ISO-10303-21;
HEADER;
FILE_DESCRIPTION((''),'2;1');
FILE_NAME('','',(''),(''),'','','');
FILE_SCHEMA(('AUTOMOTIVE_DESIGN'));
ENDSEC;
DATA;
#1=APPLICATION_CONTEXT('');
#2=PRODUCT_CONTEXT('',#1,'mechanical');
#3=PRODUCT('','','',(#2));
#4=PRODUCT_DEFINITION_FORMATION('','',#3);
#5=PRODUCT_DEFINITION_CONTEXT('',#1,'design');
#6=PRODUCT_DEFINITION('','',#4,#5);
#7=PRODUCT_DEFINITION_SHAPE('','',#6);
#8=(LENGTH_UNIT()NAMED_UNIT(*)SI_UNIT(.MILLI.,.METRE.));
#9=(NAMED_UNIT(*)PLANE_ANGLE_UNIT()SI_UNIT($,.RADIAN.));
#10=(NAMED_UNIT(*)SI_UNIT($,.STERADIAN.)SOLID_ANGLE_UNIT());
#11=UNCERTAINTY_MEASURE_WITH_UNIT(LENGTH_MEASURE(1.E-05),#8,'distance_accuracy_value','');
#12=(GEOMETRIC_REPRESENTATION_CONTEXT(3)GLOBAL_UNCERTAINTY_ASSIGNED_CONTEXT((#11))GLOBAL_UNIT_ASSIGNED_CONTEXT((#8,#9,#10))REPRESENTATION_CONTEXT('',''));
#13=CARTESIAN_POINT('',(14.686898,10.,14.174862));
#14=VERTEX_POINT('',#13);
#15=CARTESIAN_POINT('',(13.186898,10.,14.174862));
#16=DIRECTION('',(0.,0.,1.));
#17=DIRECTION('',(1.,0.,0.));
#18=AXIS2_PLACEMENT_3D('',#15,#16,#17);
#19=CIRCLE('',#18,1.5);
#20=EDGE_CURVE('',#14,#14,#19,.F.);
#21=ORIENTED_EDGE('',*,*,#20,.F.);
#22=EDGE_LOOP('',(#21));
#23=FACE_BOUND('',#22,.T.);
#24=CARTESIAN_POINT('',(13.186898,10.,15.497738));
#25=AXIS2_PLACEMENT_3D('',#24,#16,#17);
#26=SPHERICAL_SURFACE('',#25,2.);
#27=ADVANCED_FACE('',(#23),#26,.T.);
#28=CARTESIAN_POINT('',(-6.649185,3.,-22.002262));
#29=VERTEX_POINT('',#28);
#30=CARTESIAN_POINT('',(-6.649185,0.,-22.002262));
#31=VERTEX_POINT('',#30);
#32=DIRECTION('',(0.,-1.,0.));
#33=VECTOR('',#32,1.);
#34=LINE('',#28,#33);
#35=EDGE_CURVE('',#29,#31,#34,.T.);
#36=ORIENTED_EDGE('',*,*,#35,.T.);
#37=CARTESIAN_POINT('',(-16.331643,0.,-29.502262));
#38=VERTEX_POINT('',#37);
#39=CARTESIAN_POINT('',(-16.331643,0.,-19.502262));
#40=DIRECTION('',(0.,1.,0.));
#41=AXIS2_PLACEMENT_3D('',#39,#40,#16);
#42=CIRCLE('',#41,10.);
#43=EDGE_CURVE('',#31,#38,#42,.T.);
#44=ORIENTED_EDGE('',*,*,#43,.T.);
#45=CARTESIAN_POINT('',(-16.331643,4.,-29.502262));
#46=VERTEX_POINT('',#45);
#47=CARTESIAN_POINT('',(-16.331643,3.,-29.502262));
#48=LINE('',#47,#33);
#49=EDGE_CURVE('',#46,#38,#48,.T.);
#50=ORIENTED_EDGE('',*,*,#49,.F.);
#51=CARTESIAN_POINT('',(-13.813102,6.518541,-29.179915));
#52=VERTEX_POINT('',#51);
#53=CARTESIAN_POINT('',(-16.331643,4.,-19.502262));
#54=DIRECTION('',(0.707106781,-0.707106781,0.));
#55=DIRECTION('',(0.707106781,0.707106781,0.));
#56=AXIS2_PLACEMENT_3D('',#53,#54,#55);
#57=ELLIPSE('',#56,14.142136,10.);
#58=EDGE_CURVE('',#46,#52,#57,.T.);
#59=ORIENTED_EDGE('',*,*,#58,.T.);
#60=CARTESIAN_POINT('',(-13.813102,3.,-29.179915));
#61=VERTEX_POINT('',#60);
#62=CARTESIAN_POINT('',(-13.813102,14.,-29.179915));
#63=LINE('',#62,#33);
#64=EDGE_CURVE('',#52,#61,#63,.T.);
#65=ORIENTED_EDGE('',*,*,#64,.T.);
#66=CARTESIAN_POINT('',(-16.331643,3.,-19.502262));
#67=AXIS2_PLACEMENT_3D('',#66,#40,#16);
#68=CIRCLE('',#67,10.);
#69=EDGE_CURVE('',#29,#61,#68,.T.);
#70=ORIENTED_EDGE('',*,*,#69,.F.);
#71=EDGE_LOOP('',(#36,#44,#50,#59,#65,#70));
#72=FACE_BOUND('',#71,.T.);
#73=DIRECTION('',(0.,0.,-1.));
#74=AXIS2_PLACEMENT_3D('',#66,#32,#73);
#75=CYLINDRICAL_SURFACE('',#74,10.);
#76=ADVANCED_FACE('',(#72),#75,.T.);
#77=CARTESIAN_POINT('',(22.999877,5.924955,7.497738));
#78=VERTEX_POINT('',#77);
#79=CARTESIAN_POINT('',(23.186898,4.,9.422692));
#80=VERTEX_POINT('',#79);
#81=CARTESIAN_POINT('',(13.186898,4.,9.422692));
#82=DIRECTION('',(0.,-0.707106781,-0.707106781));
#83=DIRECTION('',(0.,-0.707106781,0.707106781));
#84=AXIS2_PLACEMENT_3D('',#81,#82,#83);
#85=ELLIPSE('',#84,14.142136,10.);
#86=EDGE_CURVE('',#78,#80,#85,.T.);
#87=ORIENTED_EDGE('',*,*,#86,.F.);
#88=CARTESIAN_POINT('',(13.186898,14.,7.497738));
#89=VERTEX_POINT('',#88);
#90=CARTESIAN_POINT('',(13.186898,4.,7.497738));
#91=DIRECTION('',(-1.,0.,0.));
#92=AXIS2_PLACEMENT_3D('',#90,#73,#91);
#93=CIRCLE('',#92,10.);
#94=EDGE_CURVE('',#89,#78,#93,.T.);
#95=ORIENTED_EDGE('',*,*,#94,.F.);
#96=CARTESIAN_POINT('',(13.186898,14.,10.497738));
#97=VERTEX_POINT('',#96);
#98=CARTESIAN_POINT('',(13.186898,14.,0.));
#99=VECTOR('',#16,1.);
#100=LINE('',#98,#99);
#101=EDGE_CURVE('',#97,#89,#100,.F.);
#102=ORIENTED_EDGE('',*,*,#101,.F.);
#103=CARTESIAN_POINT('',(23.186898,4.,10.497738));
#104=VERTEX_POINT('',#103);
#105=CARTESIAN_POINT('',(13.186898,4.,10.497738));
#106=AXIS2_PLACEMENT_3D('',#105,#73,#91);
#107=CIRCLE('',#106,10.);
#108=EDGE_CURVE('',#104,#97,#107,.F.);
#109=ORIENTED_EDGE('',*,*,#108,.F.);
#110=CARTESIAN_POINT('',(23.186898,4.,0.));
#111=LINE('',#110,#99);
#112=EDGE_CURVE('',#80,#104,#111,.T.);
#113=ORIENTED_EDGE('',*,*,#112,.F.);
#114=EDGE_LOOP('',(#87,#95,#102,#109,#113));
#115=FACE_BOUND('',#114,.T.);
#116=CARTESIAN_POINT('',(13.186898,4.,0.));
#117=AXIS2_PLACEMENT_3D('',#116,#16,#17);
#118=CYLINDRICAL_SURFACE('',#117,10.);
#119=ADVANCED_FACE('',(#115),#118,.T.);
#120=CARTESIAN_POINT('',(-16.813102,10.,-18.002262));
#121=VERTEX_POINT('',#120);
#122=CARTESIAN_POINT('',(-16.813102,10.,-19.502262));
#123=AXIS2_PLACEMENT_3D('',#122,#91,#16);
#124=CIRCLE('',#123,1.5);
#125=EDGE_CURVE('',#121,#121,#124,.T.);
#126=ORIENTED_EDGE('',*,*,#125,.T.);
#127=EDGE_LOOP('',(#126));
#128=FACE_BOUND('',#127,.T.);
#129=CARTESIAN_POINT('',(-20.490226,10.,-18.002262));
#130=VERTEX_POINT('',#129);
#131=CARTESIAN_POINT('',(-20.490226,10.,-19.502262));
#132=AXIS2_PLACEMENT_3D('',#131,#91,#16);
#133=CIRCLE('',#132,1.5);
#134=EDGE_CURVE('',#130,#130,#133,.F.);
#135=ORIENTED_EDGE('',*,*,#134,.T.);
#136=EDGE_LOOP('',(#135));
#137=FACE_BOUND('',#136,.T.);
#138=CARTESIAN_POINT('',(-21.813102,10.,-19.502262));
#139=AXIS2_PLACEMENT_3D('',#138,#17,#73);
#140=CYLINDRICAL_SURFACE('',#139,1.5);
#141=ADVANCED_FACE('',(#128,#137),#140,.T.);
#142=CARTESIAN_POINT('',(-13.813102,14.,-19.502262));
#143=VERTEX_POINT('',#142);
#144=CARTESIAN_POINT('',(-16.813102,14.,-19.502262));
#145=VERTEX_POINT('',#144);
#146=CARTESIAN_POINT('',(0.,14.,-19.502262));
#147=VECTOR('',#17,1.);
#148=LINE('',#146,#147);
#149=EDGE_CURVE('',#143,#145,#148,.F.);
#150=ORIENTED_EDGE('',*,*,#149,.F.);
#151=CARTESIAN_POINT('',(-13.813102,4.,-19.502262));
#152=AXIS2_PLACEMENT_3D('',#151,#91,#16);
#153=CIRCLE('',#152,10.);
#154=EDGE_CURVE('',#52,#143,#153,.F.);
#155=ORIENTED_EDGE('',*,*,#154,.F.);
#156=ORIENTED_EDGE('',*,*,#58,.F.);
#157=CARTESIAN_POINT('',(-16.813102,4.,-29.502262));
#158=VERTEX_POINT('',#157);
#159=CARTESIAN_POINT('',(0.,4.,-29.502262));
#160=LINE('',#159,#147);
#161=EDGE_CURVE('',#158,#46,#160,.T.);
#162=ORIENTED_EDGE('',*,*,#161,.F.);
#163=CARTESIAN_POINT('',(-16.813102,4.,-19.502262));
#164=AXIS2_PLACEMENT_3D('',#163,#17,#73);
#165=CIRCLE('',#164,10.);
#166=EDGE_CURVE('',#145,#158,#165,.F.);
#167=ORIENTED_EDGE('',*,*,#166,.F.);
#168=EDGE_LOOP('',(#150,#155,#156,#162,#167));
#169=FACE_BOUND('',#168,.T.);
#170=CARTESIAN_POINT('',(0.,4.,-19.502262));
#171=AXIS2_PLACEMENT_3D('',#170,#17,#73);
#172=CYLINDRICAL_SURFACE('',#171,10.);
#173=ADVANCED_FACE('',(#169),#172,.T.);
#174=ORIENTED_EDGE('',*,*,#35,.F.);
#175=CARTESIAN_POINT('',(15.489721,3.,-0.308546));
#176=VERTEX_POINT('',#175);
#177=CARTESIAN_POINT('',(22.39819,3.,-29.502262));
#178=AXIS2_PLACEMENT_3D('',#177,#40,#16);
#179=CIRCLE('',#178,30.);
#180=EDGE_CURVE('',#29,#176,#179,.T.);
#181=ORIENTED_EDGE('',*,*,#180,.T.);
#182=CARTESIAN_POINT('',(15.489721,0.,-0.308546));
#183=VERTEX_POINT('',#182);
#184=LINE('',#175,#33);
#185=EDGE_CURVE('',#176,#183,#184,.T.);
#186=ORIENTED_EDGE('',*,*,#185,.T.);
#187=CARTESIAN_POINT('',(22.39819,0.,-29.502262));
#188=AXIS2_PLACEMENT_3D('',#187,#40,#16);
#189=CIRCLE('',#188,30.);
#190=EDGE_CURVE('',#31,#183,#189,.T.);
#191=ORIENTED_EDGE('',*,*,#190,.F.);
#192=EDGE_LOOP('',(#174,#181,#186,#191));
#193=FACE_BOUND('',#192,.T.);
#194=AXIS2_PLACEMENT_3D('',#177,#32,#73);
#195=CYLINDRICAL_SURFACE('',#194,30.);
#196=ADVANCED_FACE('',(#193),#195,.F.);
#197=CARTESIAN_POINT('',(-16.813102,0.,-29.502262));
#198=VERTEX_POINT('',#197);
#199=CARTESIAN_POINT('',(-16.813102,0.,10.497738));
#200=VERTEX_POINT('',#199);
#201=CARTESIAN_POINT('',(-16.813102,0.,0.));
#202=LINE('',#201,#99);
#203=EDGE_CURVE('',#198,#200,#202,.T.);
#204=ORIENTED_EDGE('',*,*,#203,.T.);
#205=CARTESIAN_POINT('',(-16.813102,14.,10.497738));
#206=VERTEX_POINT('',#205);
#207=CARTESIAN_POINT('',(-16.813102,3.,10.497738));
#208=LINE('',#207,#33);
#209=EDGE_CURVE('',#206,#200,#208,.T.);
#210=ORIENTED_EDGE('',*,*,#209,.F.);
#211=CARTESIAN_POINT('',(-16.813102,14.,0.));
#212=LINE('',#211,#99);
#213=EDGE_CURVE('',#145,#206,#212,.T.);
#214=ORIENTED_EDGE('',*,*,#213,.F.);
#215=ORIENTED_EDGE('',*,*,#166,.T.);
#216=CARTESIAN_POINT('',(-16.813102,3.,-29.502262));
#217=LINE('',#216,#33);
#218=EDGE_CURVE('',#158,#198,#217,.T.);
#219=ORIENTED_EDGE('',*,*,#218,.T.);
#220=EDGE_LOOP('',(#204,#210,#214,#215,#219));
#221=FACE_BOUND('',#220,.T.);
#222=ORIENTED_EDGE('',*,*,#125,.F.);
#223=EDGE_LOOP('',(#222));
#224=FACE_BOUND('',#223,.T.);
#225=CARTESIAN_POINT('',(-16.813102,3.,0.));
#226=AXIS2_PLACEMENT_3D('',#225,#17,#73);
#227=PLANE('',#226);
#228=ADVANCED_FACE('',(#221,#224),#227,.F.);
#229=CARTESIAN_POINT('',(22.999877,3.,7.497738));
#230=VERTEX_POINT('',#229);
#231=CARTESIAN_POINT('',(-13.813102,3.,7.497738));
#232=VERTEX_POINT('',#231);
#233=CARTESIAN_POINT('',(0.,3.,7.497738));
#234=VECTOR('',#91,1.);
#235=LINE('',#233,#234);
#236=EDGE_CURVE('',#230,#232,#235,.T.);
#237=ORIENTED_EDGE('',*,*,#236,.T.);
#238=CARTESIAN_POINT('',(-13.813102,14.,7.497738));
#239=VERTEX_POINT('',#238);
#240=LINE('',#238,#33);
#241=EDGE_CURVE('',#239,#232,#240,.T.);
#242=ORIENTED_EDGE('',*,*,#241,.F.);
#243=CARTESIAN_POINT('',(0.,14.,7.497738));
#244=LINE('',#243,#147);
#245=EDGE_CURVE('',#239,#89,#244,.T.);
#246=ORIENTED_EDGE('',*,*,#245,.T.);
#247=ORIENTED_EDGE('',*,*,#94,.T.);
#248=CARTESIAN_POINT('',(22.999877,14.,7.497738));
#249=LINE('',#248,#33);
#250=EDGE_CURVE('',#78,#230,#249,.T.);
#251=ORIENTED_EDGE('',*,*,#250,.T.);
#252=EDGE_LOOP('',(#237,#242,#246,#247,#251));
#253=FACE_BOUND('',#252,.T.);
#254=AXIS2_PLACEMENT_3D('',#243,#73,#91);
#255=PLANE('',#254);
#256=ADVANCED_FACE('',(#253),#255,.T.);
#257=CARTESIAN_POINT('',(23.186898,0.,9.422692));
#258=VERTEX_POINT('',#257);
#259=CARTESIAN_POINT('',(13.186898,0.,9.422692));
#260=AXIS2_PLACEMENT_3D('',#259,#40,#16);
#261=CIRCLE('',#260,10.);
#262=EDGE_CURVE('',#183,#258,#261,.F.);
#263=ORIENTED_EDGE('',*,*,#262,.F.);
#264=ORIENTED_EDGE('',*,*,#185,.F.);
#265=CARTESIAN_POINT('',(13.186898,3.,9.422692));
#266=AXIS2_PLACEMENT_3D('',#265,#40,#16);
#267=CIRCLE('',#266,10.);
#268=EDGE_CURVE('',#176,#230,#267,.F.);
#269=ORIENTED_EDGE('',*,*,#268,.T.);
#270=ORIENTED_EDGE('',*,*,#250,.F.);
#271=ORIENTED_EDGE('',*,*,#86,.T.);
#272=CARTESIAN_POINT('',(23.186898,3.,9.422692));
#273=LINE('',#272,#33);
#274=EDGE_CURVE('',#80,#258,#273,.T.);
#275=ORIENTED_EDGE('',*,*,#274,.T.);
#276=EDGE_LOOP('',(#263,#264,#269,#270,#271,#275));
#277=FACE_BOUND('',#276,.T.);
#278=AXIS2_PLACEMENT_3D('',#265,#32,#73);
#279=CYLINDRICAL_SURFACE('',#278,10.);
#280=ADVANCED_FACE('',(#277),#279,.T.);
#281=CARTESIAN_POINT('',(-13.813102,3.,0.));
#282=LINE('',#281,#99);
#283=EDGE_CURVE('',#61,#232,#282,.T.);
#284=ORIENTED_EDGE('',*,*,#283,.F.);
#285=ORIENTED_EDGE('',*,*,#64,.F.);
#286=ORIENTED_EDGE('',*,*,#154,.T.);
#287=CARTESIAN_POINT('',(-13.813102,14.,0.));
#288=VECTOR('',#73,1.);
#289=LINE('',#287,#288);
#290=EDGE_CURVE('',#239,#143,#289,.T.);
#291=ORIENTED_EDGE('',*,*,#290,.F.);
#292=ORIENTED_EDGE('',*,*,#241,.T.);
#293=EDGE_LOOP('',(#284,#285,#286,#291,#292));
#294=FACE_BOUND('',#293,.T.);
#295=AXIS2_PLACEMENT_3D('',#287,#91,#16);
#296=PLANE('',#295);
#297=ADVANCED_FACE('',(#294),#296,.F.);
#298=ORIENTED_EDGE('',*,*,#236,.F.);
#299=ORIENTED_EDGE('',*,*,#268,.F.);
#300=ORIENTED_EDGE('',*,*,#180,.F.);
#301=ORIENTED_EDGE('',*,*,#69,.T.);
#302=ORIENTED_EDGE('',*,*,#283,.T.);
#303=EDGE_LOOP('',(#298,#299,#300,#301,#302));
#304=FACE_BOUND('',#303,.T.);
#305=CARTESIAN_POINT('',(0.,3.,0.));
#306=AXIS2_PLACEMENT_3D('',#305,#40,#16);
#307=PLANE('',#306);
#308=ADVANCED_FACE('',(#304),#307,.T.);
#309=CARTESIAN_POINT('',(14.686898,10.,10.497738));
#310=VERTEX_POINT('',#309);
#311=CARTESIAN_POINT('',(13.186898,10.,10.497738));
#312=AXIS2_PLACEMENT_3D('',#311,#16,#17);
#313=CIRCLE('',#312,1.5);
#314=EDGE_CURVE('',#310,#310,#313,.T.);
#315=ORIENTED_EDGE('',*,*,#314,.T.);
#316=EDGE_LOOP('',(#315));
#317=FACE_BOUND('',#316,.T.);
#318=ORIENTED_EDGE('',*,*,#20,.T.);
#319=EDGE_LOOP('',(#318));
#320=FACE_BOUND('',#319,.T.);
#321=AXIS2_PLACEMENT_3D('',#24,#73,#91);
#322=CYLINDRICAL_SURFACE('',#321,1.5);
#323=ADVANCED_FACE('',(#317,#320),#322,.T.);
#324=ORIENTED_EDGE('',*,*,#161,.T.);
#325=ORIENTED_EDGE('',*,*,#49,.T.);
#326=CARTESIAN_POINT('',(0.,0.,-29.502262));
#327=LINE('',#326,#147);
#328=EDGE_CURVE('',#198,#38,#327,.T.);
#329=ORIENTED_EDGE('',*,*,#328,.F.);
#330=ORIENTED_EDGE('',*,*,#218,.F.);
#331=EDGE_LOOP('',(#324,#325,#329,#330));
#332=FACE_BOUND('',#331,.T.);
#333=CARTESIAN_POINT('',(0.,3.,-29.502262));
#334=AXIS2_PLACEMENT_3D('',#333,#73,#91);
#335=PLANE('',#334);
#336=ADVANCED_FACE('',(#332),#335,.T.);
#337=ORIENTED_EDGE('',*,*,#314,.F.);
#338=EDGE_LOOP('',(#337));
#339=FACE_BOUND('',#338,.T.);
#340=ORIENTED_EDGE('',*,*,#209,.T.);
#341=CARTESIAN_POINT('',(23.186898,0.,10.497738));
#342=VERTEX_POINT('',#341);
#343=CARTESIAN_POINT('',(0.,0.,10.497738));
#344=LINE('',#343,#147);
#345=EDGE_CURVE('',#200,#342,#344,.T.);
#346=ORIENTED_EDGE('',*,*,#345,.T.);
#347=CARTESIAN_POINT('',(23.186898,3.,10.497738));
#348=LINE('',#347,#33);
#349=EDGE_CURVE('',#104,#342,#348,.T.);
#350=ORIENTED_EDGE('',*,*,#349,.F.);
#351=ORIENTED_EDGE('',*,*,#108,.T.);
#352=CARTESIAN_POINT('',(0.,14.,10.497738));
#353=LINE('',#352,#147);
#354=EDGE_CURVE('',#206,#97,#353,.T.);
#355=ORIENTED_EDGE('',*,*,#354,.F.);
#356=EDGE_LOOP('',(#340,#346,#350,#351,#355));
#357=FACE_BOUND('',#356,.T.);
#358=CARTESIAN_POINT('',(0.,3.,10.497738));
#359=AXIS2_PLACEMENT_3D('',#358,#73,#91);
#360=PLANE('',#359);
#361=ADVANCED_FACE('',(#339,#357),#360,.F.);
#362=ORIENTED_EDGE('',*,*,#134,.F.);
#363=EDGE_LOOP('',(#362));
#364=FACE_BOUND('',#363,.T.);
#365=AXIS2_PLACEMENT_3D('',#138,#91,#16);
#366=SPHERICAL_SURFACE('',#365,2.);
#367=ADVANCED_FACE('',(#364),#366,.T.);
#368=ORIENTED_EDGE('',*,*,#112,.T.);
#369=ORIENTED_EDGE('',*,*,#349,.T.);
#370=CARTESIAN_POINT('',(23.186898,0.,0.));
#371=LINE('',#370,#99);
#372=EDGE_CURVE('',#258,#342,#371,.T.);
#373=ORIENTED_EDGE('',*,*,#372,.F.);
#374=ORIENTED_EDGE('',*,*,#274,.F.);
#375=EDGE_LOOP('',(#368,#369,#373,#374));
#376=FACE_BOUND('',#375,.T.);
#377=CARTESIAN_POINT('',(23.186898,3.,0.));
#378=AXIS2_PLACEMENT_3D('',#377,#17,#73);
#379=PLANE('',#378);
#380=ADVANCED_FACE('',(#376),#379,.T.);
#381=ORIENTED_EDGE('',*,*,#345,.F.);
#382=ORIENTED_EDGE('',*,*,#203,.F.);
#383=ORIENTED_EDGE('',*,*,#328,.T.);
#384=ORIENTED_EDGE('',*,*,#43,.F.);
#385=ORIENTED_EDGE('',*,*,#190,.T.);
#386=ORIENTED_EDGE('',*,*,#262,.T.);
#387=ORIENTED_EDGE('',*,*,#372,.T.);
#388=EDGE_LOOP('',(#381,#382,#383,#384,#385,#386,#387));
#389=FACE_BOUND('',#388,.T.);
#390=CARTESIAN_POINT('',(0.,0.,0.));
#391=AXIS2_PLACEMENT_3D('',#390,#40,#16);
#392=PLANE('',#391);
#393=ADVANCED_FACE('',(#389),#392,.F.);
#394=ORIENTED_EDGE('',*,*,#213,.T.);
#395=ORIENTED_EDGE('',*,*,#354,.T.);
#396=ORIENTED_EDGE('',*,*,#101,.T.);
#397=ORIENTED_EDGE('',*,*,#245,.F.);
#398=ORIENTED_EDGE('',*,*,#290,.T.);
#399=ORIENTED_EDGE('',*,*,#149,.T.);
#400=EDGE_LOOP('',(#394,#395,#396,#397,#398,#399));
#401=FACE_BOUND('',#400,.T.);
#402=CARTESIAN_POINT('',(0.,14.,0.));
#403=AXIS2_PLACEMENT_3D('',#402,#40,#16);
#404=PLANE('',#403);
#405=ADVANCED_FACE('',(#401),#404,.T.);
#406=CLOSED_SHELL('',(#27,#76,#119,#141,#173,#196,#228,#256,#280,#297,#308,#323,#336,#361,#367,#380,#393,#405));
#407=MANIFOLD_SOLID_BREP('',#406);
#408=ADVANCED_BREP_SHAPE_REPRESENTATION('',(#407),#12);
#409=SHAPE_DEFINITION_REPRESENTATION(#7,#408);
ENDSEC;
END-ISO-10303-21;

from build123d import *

# Parameters (mm, degrees)
BOSS_EXTRUDE2_DEPTH = 3
BOSS_EXTRUDE3_DEPTH = 14
FILLET2_R           = 10
SKETCH3_R           = 1.5
BOSS_EXTRUDE4_DEPTH = 5
SKETCH2_R           = 1.5
BOSS_EXTRUDE5_DEPTH = 5


with BuildPart() as part:
    # Sketch1 → Boss-Extrude2 (new body)
    with BuildSketch(Plane(origin=(0, 0, 0), x_dir=(1, 0, 0), z_dir=(0, 1, 0))):
        with BuildLine():
            Line((-13.813102114, 29.179914519), (-13.813102114, -7.497737557))
            Line((-13.813102114, -7.497737557), (22.999876511, -7.497737557))
            ThreePointArc((22.999876511, -7.497737557), (20.393331118, -2.4896323), (15.489720926, 0.308546434))
            ThreePointArc((15.489720926, 0.308546434), (1.40152336, 8.074710364), (-6.649185051, 22.002262443))
            ThreePointArc((-6.649185051, 22.002262443), (-9.253806843, 26.566555008), (-13.813102114, 29.179914519))
        make_face()
        with BuildLine():
            Line((22.999876511, -7.497737557), (-13.813102114, -7.497737557))
            Line((-13.813102114, -7.497737557), (-13.813102114, 29.179914519))
            ThreePointArc((-13.813102114, 29.179914519), (-15.062100342, 29.421348106), (-16.331643417, 29.502262443))
            Line((-16.331643417, 29.502262443), (-16.813102114, 29.502262443))
            Line((-16.813102114, 29.502262443), (-16.813102114, -10.497737557))
            Line((-16.813102114, -10.497737557), (23.186897886, -10.497737557))
            Line((23.186897886, -10.497737557), (23.186897886, -9.422692236))
            ThreePointArc((23.186897886, -9.422692236), (23.140032725, -8.455682992), (22.999876511, -7.497737557))
        make_face()
    extrude(amount=BOSS_EXTRUDE2_DEPTH)

    # Sketch1<4> → Boss-Extrude3 (add)
    with BuildSketch(Plane(origin=(0, 0, 0), x_dir=(1, 0, 0), z_dir=(0, 1, 0))):
        with BuildLine():
            Line((22.999876511, -7.497737557), (-13.813102114, -7.497737557))
            Line((-13.813102114, -7.497737557), (-13.813102114, 29.179914519))
            ThreePointArc((-13.813102114, 29.179914519), (-15.062100342, 29.421348106), (-16.331643417, 29.502262443))
            Line((-16.331643417, 29.502262443), (-16.813102114, 29.502262443))
            Line((-16.813102114, 29.502262443), (-16.813102114, -10.497737557))
            Line((-16.813102114, -10.497737557), (23.186897886, -10.497737557))
            Line((23.186897886, -10.497737557), (23.186897886, -9.422692236))
            ThreePointArc((23.186897886, -9.422692236), (23.140032725, -8.455682992), (22.999876511, -7.497737557))
        make_face()
    extrude(amount=BOSS_EXTRUDE3_DEPTH)

    # Fillet2
    # the kernel refuses this fillet: 10 mm, written as the material it takes off along each edge
    with BuildSketch(Plane(origin=(8.668356583, 14, -29.502262443), x_dir=(0, -1, 0), z_dir=(-1, 0, 0))) as fillet2_piece_1:
        with BuildLine():
            CenterArc((FILLET2_R, FILLET2_R), FILLET2_R, 180, 90)
            Line((0, FILLET2_R), (0, 0))
            Line((0, 0), (FILLET2_R, 0))
        make_face()
    extrude(amount=50.481458697, mode=Mode.SUBTRACT)
    with BuildSketch(Plane(origin=(23.186897886, 14, 35.497737557), x_dir=(-1, 0, 0), z_dir=(0, 0, -1))) as fillet2_piece_2:
        with BuildLine():
            CenterArc((FILLET2_R, -FILLET2_R), FILLET2_R, 90, 90)
            Line((0, -FILLET2_R), (0, 0))
            Line((0, 0), (FILLET2_R, 0))
        make_face()
    extrude(amount=51.075045321, mode=Mode.SUBTRACT)

    # Sketch3 → Boss-Extrude4 (add)
    with BuildSketch(Plane.ZY.offset(16.813102114)):
        with Locations((-19.502262443, 10)):
            Circle(SKETCH3_R)
    extrude(amount=BOSS_EXTRUDE4_DEPTH)

    # Sketch4 → Revolve1 (revolve)
    with BuildSketch(Plane.ZY.offset(21.813102114)):
        with BuildLine():
            Line((-19.502262443, 12), (-19.502262443, 8))
            ThreePointArc((-19.502262443, 8), (-21.502262443, 10), (-19.502262443, 12))
        make_face()
    revolve(axis=Axis((-21.813102114, 12, -19.502262443), (0, -1, 0)))

    # Sketch2 → Boss-Extrude5 (add)
    with BuildSketch(Plane.XY.offset(10.497737557)):
        with Locations((13.186897886, 10)):
            Circle(SKETCH2_R)
    extrude(amount=BOSS_EXTRUDE5_DEPTH)

    # Sketch5 → Revolve2 (revolve)
    with BuildSketch(Plane.XY.offset(15.497737557)):
        with BuildLine():
            Line((13.186897886, 12), (13.186897886, 8))
            ThreePointArc((13.186897886, 8), (11.186897886, 10), (13.186897886, 12))
        make_face()
    revolve(axis=Axis((13.186897886, 12, 15.497737557), (0, -1, 0)))


solid = part.part
